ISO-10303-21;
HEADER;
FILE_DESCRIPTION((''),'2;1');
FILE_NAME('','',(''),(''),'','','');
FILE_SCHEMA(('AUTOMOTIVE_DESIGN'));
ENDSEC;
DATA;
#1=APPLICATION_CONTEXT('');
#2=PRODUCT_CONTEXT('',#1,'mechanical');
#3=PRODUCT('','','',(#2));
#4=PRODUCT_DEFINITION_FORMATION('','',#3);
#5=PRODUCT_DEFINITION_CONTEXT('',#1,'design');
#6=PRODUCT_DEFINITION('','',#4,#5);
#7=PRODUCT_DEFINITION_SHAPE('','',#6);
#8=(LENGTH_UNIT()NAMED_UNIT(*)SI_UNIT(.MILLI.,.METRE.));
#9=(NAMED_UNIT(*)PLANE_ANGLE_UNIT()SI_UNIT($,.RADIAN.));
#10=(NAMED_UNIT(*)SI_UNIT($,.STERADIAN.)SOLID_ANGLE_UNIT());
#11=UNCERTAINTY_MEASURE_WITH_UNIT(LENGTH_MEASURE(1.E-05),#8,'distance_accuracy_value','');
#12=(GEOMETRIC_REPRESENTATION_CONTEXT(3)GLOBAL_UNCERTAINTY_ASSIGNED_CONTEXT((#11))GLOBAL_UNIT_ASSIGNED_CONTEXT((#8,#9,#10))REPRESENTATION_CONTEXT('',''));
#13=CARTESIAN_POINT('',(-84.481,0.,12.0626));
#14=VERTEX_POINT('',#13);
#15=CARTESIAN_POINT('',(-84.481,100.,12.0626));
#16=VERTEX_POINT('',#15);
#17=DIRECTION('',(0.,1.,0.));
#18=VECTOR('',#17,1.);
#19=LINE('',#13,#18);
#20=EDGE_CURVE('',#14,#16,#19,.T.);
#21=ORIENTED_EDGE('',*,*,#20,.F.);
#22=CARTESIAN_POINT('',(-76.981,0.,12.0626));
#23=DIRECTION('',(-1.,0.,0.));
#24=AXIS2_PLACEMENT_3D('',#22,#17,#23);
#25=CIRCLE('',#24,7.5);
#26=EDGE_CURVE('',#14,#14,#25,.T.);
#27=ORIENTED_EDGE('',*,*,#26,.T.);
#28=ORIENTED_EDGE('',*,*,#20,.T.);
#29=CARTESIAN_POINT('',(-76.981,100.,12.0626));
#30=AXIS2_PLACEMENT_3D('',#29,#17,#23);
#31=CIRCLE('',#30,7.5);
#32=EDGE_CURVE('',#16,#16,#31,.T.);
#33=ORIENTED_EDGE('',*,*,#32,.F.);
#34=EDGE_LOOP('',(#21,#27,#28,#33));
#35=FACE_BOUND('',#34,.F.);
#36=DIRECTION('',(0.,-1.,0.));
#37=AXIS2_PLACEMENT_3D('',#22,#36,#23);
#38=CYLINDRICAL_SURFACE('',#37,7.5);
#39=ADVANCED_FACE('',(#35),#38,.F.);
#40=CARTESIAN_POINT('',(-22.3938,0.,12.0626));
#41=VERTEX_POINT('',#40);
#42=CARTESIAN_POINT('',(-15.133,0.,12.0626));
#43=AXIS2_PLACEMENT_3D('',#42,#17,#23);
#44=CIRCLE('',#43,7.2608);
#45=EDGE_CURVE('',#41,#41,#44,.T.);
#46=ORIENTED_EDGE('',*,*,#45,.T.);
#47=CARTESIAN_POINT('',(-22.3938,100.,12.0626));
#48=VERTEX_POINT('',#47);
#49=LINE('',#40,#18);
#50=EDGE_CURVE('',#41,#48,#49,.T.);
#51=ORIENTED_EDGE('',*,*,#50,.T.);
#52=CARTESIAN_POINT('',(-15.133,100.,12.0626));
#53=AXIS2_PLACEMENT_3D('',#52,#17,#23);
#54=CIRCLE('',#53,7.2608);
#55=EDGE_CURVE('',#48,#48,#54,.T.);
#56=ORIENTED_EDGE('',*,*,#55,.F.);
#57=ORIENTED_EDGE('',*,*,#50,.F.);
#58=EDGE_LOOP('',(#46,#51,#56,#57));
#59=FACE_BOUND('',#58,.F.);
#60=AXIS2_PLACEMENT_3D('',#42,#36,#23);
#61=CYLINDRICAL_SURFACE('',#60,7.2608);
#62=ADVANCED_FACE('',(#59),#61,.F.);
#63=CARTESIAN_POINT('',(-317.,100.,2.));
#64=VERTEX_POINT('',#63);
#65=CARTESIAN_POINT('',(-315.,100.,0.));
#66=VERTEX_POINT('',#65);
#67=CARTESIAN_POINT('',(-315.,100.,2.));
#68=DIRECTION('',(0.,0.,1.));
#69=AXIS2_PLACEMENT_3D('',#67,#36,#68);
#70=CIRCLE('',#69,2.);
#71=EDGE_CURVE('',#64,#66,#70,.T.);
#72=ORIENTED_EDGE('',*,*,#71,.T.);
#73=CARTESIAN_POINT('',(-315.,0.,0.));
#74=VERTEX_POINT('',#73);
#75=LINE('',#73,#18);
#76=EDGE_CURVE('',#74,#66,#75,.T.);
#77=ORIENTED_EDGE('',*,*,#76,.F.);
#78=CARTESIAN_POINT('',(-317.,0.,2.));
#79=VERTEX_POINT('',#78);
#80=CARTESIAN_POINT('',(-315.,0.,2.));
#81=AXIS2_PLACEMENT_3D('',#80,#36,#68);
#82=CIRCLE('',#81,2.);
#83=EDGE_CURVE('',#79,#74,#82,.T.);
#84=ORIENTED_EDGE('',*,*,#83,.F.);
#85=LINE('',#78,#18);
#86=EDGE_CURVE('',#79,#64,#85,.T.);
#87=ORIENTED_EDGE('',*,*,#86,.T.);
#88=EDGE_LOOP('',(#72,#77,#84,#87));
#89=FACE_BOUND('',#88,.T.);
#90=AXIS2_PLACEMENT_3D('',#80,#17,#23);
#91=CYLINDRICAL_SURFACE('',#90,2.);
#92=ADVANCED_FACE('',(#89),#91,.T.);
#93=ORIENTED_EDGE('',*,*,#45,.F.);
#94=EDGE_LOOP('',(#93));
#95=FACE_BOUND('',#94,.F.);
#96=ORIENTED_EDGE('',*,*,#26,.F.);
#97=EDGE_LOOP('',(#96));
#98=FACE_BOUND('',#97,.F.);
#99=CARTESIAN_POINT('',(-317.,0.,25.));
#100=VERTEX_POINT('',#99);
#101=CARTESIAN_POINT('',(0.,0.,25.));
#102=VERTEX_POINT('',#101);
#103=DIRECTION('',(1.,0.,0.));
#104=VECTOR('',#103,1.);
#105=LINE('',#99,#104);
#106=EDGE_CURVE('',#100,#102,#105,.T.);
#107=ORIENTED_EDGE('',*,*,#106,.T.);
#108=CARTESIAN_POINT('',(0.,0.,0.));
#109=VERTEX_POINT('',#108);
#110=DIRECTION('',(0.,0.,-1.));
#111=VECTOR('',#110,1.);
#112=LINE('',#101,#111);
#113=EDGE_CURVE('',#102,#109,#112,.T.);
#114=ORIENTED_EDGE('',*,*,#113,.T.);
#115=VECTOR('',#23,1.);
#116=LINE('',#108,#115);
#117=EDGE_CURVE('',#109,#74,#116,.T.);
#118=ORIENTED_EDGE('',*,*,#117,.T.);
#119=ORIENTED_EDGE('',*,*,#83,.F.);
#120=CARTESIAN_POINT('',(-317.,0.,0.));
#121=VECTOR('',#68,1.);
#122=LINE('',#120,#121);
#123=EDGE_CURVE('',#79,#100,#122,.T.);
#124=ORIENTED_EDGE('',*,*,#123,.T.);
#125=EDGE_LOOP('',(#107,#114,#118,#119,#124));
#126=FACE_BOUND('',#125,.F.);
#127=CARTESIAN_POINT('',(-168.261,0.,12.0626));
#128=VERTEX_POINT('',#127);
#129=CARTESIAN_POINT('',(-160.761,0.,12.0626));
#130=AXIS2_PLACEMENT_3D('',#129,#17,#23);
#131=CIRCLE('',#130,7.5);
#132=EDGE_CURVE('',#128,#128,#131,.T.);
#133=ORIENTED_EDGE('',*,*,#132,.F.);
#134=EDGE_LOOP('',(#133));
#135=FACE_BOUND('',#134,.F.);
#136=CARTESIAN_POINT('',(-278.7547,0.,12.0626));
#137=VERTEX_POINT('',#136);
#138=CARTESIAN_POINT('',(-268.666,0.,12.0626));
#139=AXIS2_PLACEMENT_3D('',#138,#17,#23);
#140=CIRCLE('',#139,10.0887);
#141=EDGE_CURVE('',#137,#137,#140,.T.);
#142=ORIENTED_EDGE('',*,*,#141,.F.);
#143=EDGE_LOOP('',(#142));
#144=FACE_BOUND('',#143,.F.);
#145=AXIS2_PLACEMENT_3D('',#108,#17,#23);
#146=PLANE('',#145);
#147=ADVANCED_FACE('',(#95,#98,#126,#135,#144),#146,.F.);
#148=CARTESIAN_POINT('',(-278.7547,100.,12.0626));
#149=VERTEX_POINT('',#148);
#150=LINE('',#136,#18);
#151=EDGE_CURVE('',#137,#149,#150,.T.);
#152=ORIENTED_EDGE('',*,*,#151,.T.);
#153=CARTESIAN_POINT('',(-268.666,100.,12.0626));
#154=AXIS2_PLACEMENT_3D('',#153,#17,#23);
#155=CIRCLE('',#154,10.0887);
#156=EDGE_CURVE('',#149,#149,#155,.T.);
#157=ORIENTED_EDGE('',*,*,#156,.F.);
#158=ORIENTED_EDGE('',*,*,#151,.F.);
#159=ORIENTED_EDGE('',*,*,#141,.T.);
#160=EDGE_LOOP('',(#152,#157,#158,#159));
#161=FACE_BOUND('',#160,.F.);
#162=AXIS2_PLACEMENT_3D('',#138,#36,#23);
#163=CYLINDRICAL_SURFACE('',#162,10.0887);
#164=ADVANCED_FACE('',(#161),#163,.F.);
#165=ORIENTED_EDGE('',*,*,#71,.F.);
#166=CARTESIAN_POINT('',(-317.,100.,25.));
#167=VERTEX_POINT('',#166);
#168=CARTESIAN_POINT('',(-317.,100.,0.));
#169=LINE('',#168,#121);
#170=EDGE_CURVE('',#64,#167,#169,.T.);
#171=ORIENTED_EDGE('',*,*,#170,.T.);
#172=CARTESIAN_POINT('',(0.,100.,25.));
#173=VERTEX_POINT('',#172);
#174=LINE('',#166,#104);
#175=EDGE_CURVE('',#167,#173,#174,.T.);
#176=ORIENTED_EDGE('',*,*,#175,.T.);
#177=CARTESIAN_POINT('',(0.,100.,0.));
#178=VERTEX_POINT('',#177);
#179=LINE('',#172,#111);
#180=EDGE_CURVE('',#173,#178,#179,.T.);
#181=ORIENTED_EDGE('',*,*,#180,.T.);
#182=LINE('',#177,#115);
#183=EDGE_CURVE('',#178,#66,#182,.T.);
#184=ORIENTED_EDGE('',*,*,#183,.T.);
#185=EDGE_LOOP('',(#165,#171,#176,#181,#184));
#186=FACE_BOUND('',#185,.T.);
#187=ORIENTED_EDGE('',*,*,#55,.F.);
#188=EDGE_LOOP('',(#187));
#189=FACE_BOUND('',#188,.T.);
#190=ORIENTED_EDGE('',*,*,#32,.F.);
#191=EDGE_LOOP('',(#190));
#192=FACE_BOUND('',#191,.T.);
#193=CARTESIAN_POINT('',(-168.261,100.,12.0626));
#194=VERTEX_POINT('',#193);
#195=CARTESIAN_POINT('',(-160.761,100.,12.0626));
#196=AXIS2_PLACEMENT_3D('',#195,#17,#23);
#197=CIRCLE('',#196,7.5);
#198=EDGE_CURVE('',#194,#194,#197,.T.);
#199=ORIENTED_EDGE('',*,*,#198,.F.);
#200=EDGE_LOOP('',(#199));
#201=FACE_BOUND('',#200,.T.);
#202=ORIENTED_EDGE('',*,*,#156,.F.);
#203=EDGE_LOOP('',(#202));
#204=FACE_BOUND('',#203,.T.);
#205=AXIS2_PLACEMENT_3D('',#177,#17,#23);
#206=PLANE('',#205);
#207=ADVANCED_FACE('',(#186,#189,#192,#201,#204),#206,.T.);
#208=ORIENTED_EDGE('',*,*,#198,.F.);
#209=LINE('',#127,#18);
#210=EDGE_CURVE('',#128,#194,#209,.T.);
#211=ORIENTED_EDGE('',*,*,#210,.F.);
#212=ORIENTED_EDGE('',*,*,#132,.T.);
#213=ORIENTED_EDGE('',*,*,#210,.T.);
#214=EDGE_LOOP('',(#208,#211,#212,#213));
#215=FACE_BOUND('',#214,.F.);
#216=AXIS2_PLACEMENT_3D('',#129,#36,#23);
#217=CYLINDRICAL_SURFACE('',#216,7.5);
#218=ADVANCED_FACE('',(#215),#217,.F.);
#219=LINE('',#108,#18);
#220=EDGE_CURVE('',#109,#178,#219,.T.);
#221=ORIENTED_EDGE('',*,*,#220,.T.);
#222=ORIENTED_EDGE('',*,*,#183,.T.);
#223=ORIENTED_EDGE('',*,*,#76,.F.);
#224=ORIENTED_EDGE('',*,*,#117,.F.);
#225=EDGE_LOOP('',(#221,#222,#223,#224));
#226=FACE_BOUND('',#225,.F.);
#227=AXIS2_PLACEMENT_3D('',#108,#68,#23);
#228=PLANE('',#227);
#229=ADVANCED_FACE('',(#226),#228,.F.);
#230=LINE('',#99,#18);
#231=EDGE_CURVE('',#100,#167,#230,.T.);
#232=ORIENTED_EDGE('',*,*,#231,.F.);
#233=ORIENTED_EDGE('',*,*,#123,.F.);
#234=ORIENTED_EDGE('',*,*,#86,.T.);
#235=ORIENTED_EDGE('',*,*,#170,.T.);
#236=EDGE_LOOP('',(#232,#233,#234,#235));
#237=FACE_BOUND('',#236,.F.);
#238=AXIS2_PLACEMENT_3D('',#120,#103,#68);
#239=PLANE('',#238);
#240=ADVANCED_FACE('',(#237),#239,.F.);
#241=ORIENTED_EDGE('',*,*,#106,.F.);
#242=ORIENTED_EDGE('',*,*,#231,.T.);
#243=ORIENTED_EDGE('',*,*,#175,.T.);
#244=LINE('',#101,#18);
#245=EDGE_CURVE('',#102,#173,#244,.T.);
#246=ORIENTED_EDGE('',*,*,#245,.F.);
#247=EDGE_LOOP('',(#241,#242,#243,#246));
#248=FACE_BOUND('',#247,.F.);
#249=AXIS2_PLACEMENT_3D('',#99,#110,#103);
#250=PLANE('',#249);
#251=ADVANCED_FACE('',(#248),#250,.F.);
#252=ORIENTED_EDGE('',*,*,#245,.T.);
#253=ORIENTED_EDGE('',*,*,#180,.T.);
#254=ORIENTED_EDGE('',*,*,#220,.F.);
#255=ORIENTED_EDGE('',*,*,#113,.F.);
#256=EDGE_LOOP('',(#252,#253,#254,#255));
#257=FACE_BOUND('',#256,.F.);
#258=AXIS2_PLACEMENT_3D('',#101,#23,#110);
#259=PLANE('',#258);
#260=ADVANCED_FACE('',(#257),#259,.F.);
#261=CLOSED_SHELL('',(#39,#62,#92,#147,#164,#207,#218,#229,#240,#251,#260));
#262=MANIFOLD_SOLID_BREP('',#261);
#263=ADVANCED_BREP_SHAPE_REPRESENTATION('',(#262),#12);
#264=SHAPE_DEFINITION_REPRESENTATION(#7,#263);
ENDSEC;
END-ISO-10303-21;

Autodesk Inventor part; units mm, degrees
ref_plane "YZ Plane" through (0, 0, 0) normal (1, 0, 0) x (0, 1, 0)
ref_plane "XZ Plane" through (0, 0, 0) normal (0, 1, 0) x (-1, 0, 0)
ref_plane "XY Plane" through (0, 0, 0) normal (0, 0, 1) x (1, 0, 0)
sketch "Sketch1" plane through (0, 0, 0) normal (0, 1, 0) x (-1, 0, 0)
  line L0 (0, 0) -> (317, 0)
  line L1 (317, 0) -> (317, 25)
  line L2 (317, 25) -> (0, 25)
  line L3 (0, 25) -> (0, 0)
  dimension "d0" = 317
  dimension "d1" = 25
extrude "Extrusion1" add sketch "Sketch1" along normal blind 100
fillet "Face Fillet1" radius 2 1 edges at (-317, 50, 0)
sketch "Sketch5" plane through (0, 0, 0) normal (0, 1, 0) x (-1, 0, 0)
  circle A0 centre (15.133, 12.0626) radius 7.2608
  circle A1 centre (76.981, 12.0626) radius 7.5
  circle A2 centre (160.761, 12.0626) radius 7.5
  circle A3 centre (268.666, 12.0626) radius 10.0887
  point P0 (0, 0)
  dimension "d16" = 15
  dimension "d17" = 15
extrude "Extrusion4" cut sketch "Sketch5" along normal blind 100
sketch "Sketch6" plane through (-317, 0, 25) normal (-1, 0, 0) x (0, 0, 1)
  point P0 (-25, 0)
properties part number "BASE"
